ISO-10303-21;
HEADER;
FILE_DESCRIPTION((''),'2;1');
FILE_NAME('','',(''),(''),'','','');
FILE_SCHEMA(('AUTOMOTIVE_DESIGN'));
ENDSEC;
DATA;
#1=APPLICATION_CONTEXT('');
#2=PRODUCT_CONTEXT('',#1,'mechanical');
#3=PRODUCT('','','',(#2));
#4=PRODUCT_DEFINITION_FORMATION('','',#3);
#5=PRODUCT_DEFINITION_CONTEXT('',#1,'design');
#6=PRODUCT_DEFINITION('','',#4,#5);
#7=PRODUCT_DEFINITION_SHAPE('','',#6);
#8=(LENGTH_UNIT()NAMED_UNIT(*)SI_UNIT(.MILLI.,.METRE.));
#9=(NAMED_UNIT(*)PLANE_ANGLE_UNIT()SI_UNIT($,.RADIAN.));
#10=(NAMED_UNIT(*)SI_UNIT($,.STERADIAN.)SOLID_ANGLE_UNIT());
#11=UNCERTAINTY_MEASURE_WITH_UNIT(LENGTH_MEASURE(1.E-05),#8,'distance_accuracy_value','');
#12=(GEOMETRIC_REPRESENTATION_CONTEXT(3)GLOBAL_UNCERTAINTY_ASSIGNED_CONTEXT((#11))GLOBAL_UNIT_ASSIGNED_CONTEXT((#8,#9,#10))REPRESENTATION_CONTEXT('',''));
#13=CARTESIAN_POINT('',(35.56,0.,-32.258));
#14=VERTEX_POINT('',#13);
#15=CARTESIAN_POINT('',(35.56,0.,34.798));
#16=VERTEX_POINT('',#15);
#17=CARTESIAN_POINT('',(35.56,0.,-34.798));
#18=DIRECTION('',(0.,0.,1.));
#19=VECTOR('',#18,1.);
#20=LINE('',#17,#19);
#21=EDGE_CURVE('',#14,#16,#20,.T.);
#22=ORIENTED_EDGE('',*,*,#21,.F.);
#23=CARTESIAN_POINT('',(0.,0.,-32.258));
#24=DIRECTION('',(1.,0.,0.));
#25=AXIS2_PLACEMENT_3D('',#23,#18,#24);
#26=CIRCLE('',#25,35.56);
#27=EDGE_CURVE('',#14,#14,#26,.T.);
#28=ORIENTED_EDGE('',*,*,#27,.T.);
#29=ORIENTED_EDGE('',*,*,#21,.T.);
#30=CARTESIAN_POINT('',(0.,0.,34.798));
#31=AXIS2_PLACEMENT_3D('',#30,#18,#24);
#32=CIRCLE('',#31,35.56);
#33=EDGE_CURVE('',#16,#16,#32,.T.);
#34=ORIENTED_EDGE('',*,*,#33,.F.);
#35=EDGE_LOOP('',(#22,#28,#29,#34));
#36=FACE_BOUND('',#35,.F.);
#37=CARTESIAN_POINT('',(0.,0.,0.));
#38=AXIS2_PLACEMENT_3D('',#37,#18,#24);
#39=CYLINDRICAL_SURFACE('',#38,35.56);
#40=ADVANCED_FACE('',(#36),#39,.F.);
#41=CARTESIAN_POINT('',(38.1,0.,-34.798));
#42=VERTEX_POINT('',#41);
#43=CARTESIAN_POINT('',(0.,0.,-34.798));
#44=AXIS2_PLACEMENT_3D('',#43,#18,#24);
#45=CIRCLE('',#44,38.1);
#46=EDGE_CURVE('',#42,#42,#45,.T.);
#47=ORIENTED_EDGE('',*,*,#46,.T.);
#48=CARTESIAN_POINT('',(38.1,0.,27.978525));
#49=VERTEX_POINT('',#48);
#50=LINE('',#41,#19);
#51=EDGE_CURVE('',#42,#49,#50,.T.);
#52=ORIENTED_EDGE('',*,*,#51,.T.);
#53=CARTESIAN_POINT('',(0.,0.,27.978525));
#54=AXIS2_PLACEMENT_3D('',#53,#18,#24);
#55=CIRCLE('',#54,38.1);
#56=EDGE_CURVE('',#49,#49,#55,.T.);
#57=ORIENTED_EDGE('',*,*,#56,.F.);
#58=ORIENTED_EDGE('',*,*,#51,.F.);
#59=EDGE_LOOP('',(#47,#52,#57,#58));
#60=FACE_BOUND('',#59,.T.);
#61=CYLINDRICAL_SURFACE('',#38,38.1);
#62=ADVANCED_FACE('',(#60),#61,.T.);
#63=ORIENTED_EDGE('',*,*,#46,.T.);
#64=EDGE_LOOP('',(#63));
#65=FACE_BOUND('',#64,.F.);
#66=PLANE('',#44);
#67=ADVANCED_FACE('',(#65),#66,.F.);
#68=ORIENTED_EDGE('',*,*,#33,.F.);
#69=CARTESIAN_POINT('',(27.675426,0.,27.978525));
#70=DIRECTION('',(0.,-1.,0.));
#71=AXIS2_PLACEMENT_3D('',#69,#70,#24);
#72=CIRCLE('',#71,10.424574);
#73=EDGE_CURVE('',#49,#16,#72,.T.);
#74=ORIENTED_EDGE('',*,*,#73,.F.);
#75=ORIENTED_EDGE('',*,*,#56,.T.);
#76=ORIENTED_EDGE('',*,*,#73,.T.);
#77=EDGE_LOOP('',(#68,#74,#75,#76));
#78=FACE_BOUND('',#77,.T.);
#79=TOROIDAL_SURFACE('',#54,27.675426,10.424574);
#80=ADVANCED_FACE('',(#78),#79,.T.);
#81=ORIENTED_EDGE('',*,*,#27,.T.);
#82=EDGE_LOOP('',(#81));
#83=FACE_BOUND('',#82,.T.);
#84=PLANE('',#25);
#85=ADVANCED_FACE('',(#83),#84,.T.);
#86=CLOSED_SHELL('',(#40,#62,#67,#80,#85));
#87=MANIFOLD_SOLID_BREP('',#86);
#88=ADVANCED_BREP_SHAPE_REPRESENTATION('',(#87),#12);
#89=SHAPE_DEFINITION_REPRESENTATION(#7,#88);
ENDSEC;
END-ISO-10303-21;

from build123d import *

# Parameters (mm, degrees)
F0_R     = 38.1
F1_DEPTH = 34.798
F2_T     = -2.54


# Not quite as in the source:
# - a fillet or chamfer that OpenCascade refuses, or shapes differently, is made with other operations: its cross-section is extruded or revolved along the edge and cut away or added
# - the program builds the solid bodies; features that only make, move or delete a surface that nothing else refers to are left out


with BuildPart() as f1:
    # F0 (on Top) → F1 (new body, symmetric)
    with BuildSketch(Plane.XY):
        Circle(F0_R)
    extrude(amount=F1_DEPTH, both=True)

    # F2
    f2_openings = [f1.faces().sort_by_distance(p)[0] for p in [
        (0, 0, 34.798),
    ]]
    offset(amount=F2_T, openings=f2_openings)

    # F3: fillet of radius 10.4245741623 on 1 edges, made by hand

    # F3_s1 → F3_t2 (revolve, cut)
    with BuildSketch(Plane.XZ):
        with BuildLine():
            ThreePointArc((38.1, 27.9785251856), (37.4443836777, 31.617097596), (35.56, 34.798))
            Line((35.56, 34.798), (38.1, 34.798))
            Line((38.1, 34.798), (38.1, 27.9785251856))
        make_face()
    revolve(axis=Axis((0, 0, 34.798), (0, 0, 1)), mode=Mode.SUBTRACT)


solid = f1.part
